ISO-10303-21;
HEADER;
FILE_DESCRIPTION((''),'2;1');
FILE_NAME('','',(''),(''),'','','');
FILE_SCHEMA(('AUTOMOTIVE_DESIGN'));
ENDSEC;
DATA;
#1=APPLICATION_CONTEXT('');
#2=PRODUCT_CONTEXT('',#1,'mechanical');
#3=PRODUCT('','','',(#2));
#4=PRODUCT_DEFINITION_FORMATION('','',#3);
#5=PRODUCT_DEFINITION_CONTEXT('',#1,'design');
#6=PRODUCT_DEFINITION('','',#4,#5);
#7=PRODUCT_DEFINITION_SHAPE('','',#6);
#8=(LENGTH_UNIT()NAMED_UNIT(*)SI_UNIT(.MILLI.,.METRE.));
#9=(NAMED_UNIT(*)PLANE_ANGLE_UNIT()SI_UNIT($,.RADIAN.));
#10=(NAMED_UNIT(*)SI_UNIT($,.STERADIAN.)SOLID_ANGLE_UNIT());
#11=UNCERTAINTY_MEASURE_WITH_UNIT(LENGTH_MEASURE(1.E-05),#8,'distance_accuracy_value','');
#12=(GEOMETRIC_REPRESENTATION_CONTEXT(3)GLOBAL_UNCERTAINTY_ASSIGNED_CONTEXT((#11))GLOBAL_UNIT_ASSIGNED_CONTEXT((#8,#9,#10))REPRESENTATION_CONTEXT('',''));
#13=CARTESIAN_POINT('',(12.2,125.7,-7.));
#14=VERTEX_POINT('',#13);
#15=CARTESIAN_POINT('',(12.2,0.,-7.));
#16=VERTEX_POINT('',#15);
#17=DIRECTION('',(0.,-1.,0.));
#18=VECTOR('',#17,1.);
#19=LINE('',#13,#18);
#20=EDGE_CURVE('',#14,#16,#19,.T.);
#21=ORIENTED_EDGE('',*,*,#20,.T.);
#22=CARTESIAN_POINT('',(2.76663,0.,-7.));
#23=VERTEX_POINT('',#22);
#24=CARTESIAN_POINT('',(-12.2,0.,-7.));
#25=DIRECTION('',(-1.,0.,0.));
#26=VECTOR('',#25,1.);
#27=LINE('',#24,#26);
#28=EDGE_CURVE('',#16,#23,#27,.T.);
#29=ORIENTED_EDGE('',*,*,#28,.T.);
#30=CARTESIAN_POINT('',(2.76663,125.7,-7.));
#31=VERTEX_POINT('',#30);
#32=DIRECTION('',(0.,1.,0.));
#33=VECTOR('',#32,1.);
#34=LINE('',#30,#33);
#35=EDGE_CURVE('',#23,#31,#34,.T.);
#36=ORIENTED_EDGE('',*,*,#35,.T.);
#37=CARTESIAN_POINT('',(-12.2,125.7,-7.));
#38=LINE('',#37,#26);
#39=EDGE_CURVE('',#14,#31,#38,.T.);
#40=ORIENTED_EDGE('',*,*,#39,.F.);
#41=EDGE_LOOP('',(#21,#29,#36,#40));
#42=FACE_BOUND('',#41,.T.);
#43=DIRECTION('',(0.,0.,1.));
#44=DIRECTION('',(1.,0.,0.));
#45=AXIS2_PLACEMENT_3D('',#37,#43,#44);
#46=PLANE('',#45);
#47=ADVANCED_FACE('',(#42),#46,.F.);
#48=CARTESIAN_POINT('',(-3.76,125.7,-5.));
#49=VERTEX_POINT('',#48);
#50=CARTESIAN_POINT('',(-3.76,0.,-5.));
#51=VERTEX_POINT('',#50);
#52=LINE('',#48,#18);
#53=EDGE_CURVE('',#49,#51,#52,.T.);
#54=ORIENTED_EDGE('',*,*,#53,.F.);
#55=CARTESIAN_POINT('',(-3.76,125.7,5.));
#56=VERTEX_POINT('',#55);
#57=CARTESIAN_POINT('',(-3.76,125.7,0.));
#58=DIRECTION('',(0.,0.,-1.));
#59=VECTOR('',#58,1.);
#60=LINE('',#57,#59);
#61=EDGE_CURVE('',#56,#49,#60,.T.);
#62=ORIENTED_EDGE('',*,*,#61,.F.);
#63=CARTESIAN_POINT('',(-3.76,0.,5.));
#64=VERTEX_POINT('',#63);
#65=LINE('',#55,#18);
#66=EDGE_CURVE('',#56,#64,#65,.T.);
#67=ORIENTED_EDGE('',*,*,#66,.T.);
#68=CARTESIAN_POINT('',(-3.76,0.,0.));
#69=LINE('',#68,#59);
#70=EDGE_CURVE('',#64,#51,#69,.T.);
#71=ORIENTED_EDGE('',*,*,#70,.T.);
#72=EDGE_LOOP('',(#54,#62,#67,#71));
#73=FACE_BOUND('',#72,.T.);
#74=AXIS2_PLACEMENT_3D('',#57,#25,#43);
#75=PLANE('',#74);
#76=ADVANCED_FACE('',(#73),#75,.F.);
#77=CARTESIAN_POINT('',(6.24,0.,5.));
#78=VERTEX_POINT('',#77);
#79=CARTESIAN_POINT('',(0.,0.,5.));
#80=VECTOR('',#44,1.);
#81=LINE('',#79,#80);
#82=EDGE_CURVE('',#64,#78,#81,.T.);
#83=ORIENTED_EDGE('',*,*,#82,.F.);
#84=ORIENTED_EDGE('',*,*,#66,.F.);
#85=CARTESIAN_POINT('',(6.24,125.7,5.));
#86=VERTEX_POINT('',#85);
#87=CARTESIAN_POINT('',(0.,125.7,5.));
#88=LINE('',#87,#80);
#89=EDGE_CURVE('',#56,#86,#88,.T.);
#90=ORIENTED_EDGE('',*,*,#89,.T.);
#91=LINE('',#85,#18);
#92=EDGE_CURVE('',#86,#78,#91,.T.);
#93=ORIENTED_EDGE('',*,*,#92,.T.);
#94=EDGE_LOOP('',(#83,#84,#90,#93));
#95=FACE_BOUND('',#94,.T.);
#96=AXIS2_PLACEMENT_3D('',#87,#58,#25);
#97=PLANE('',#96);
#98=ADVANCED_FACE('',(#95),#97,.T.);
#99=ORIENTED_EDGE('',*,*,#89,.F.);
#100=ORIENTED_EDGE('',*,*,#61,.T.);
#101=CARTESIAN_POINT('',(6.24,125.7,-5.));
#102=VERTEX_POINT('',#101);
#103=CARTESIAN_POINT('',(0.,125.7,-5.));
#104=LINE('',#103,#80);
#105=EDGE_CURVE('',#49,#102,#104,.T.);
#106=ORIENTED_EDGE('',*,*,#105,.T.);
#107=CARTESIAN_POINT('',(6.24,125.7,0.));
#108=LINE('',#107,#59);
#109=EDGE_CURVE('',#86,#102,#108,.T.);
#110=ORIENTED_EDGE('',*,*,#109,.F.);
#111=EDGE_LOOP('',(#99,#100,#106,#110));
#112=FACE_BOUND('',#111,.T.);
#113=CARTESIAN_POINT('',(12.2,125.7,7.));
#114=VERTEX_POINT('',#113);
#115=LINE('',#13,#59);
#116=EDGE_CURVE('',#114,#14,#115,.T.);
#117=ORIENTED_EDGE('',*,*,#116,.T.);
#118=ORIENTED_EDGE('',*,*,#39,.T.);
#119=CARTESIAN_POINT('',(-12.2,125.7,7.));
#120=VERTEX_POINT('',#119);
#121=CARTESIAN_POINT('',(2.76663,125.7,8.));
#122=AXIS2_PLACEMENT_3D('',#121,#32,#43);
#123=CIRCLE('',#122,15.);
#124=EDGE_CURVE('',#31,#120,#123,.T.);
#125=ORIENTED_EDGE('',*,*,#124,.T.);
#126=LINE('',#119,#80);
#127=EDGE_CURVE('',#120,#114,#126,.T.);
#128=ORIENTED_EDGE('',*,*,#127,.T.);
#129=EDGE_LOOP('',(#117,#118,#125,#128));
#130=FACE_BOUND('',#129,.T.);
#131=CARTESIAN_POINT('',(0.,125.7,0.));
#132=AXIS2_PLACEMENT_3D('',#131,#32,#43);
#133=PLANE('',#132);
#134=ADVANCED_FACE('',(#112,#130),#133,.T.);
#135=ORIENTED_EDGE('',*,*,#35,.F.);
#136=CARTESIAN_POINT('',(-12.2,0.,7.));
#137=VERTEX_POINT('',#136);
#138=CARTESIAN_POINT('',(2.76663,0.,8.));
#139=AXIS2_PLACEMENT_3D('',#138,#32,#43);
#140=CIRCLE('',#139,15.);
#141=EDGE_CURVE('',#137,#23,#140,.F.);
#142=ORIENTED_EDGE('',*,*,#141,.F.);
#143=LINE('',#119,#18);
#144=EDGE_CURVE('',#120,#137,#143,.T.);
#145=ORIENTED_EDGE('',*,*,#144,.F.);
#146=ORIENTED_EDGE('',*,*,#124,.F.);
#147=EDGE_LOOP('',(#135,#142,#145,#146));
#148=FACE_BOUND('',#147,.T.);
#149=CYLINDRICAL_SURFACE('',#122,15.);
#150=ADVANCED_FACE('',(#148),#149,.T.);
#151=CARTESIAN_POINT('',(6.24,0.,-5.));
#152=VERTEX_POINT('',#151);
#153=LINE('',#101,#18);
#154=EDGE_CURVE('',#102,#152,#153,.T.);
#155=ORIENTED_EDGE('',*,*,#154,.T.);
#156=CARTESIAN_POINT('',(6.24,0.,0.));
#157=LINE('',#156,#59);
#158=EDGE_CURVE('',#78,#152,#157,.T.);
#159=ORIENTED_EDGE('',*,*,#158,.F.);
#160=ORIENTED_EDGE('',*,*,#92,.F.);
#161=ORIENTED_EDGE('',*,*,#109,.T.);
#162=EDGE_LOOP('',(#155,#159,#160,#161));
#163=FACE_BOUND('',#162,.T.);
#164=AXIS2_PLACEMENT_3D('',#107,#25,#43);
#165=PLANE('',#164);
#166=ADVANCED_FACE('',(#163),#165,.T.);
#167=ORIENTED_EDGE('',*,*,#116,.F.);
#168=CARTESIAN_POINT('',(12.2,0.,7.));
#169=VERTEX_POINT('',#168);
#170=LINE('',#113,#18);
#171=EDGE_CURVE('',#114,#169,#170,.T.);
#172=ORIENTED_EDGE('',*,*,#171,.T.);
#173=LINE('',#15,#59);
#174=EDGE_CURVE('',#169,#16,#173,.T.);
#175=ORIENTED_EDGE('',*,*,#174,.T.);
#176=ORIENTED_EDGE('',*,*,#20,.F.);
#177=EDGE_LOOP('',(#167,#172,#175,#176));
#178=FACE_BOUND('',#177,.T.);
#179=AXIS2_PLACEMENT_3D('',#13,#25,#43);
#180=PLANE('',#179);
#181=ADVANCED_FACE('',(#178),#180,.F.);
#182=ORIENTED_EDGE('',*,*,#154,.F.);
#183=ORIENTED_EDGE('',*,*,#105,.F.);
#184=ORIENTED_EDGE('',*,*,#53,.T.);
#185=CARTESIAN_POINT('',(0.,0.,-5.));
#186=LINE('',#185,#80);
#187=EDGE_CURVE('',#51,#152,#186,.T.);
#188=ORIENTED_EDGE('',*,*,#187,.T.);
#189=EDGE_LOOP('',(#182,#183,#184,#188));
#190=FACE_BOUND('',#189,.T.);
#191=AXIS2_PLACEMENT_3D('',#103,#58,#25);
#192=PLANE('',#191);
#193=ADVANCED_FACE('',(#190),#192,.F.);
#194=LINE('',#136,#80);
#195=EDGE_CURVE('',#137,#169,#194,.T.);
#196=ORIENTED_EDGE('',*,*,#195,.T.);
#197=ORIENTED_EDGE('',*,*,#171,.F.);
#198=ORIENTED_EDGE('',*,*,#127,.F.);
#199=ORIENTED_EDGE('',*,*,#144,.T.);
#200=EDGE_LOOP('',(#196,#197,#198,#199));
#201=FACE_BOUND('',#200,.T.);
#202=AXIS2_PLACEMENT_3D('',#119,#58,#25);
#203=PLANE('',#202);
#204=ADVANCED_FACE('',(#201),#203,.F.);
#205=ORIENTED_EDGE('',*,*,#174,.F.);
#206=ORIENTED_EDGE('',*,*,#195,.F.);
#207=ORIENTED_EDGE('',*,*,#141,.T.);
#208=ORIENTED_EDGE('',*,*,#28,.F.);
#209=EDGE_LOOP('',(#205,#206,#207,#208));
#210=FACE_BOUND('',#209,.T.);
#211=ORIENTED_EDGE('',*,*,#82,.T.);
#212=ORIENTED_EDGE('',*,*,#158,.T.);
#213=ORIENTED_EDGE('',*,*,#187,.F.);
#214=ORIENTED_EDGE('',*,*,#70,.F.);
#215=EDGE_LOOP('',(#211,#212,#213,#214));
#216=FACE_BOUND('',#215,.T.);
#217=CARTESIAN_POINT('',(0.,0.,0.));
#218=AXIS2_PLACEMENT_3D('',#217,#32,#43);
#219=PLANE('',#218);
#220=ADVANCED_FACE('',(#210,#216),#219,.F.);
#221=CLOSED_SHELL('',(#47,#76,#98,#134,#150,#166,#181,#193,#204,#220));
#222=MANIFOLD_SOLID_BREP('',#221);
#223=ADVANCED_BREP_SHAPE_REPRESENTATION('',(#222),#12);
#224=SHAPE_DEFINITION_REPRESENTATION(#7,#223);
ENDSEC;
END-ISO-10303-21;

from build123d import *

# Parameters (mm, degrees)
SKETCH_1_W          = 24.4
SKETCH_1_H          = 14
EXTRUDE_1_DEPTH     = 125.7
CUT_EXTRUDE_1_DEPTH = 125.7
FILLET_1_R          = 15


with BuildPart() as part:
    # Эскиз1 → Бобышка-Вытянуть1 (new body)
    with BuildSketch(Plane(origin=(0, 0, 0), x_dir=(1, 0, 0), z_dir=(0, 1, 0))):
        Rectangle(SKETCH_1_W, SKETCH_1_H)
    extrude(amount=EXTRUDE_1_DEPTH)

    # Эскиз5 → Вырез-Вытянуть1 (cut)
    with BuildSketch(Plane(origin=(0, 0, 0), x_dir=(-1, 0, 0), z_dir=(0, -1, 0))):
        Polygon((-1.24, 0), (-1.24, -5), (3.76, -5), (3.76, 5), (-1.234412321, 5), (0, 0), align=None)
        Polygon((-6.24, -5), (-1.24, -5), (-1.24, 0), (-1.24, 5), (-6.24, 5), align=None)
        Polygon((-1.24, 5), (-1.24, 0), (0, 0), (-1.234412321, 5), align=None)
    extrude(amount=-CUT_EXTRUDE_1_DEPTH, mode=Mode.SUBTRACT)

    # Скругление1
    # the kernel refuses this fillet: 15 mm, written as the material it takes off along each edge
    with BuildSketch(Plane(origin=(-12.2, -37.416573868, -7), x_dir=(1, 0, 0), z_dir=(0, 1, 0))) as fillet_1_piece_1:
        with BuildLine():
            CenterArc((14.966629547, -15), FILLET_1_R, 90, 86.177446271)
            Line((0, -14), (-0.299332591, -13.98))
            ThreePointArc((-0.299332591, -13.98), (-0.3, -7), (-0.3, 0))
            Line((-0.3, 0), (0, 0.3))
            Line((0, 0.3), (14.966629547, 0.3))
            Line((14.966629547, 0.3), (14.966629547, 0))
        make_face()
    extrude(amount=200.533147735, mode=Mode.SUBTRACT)


solid = part.part
